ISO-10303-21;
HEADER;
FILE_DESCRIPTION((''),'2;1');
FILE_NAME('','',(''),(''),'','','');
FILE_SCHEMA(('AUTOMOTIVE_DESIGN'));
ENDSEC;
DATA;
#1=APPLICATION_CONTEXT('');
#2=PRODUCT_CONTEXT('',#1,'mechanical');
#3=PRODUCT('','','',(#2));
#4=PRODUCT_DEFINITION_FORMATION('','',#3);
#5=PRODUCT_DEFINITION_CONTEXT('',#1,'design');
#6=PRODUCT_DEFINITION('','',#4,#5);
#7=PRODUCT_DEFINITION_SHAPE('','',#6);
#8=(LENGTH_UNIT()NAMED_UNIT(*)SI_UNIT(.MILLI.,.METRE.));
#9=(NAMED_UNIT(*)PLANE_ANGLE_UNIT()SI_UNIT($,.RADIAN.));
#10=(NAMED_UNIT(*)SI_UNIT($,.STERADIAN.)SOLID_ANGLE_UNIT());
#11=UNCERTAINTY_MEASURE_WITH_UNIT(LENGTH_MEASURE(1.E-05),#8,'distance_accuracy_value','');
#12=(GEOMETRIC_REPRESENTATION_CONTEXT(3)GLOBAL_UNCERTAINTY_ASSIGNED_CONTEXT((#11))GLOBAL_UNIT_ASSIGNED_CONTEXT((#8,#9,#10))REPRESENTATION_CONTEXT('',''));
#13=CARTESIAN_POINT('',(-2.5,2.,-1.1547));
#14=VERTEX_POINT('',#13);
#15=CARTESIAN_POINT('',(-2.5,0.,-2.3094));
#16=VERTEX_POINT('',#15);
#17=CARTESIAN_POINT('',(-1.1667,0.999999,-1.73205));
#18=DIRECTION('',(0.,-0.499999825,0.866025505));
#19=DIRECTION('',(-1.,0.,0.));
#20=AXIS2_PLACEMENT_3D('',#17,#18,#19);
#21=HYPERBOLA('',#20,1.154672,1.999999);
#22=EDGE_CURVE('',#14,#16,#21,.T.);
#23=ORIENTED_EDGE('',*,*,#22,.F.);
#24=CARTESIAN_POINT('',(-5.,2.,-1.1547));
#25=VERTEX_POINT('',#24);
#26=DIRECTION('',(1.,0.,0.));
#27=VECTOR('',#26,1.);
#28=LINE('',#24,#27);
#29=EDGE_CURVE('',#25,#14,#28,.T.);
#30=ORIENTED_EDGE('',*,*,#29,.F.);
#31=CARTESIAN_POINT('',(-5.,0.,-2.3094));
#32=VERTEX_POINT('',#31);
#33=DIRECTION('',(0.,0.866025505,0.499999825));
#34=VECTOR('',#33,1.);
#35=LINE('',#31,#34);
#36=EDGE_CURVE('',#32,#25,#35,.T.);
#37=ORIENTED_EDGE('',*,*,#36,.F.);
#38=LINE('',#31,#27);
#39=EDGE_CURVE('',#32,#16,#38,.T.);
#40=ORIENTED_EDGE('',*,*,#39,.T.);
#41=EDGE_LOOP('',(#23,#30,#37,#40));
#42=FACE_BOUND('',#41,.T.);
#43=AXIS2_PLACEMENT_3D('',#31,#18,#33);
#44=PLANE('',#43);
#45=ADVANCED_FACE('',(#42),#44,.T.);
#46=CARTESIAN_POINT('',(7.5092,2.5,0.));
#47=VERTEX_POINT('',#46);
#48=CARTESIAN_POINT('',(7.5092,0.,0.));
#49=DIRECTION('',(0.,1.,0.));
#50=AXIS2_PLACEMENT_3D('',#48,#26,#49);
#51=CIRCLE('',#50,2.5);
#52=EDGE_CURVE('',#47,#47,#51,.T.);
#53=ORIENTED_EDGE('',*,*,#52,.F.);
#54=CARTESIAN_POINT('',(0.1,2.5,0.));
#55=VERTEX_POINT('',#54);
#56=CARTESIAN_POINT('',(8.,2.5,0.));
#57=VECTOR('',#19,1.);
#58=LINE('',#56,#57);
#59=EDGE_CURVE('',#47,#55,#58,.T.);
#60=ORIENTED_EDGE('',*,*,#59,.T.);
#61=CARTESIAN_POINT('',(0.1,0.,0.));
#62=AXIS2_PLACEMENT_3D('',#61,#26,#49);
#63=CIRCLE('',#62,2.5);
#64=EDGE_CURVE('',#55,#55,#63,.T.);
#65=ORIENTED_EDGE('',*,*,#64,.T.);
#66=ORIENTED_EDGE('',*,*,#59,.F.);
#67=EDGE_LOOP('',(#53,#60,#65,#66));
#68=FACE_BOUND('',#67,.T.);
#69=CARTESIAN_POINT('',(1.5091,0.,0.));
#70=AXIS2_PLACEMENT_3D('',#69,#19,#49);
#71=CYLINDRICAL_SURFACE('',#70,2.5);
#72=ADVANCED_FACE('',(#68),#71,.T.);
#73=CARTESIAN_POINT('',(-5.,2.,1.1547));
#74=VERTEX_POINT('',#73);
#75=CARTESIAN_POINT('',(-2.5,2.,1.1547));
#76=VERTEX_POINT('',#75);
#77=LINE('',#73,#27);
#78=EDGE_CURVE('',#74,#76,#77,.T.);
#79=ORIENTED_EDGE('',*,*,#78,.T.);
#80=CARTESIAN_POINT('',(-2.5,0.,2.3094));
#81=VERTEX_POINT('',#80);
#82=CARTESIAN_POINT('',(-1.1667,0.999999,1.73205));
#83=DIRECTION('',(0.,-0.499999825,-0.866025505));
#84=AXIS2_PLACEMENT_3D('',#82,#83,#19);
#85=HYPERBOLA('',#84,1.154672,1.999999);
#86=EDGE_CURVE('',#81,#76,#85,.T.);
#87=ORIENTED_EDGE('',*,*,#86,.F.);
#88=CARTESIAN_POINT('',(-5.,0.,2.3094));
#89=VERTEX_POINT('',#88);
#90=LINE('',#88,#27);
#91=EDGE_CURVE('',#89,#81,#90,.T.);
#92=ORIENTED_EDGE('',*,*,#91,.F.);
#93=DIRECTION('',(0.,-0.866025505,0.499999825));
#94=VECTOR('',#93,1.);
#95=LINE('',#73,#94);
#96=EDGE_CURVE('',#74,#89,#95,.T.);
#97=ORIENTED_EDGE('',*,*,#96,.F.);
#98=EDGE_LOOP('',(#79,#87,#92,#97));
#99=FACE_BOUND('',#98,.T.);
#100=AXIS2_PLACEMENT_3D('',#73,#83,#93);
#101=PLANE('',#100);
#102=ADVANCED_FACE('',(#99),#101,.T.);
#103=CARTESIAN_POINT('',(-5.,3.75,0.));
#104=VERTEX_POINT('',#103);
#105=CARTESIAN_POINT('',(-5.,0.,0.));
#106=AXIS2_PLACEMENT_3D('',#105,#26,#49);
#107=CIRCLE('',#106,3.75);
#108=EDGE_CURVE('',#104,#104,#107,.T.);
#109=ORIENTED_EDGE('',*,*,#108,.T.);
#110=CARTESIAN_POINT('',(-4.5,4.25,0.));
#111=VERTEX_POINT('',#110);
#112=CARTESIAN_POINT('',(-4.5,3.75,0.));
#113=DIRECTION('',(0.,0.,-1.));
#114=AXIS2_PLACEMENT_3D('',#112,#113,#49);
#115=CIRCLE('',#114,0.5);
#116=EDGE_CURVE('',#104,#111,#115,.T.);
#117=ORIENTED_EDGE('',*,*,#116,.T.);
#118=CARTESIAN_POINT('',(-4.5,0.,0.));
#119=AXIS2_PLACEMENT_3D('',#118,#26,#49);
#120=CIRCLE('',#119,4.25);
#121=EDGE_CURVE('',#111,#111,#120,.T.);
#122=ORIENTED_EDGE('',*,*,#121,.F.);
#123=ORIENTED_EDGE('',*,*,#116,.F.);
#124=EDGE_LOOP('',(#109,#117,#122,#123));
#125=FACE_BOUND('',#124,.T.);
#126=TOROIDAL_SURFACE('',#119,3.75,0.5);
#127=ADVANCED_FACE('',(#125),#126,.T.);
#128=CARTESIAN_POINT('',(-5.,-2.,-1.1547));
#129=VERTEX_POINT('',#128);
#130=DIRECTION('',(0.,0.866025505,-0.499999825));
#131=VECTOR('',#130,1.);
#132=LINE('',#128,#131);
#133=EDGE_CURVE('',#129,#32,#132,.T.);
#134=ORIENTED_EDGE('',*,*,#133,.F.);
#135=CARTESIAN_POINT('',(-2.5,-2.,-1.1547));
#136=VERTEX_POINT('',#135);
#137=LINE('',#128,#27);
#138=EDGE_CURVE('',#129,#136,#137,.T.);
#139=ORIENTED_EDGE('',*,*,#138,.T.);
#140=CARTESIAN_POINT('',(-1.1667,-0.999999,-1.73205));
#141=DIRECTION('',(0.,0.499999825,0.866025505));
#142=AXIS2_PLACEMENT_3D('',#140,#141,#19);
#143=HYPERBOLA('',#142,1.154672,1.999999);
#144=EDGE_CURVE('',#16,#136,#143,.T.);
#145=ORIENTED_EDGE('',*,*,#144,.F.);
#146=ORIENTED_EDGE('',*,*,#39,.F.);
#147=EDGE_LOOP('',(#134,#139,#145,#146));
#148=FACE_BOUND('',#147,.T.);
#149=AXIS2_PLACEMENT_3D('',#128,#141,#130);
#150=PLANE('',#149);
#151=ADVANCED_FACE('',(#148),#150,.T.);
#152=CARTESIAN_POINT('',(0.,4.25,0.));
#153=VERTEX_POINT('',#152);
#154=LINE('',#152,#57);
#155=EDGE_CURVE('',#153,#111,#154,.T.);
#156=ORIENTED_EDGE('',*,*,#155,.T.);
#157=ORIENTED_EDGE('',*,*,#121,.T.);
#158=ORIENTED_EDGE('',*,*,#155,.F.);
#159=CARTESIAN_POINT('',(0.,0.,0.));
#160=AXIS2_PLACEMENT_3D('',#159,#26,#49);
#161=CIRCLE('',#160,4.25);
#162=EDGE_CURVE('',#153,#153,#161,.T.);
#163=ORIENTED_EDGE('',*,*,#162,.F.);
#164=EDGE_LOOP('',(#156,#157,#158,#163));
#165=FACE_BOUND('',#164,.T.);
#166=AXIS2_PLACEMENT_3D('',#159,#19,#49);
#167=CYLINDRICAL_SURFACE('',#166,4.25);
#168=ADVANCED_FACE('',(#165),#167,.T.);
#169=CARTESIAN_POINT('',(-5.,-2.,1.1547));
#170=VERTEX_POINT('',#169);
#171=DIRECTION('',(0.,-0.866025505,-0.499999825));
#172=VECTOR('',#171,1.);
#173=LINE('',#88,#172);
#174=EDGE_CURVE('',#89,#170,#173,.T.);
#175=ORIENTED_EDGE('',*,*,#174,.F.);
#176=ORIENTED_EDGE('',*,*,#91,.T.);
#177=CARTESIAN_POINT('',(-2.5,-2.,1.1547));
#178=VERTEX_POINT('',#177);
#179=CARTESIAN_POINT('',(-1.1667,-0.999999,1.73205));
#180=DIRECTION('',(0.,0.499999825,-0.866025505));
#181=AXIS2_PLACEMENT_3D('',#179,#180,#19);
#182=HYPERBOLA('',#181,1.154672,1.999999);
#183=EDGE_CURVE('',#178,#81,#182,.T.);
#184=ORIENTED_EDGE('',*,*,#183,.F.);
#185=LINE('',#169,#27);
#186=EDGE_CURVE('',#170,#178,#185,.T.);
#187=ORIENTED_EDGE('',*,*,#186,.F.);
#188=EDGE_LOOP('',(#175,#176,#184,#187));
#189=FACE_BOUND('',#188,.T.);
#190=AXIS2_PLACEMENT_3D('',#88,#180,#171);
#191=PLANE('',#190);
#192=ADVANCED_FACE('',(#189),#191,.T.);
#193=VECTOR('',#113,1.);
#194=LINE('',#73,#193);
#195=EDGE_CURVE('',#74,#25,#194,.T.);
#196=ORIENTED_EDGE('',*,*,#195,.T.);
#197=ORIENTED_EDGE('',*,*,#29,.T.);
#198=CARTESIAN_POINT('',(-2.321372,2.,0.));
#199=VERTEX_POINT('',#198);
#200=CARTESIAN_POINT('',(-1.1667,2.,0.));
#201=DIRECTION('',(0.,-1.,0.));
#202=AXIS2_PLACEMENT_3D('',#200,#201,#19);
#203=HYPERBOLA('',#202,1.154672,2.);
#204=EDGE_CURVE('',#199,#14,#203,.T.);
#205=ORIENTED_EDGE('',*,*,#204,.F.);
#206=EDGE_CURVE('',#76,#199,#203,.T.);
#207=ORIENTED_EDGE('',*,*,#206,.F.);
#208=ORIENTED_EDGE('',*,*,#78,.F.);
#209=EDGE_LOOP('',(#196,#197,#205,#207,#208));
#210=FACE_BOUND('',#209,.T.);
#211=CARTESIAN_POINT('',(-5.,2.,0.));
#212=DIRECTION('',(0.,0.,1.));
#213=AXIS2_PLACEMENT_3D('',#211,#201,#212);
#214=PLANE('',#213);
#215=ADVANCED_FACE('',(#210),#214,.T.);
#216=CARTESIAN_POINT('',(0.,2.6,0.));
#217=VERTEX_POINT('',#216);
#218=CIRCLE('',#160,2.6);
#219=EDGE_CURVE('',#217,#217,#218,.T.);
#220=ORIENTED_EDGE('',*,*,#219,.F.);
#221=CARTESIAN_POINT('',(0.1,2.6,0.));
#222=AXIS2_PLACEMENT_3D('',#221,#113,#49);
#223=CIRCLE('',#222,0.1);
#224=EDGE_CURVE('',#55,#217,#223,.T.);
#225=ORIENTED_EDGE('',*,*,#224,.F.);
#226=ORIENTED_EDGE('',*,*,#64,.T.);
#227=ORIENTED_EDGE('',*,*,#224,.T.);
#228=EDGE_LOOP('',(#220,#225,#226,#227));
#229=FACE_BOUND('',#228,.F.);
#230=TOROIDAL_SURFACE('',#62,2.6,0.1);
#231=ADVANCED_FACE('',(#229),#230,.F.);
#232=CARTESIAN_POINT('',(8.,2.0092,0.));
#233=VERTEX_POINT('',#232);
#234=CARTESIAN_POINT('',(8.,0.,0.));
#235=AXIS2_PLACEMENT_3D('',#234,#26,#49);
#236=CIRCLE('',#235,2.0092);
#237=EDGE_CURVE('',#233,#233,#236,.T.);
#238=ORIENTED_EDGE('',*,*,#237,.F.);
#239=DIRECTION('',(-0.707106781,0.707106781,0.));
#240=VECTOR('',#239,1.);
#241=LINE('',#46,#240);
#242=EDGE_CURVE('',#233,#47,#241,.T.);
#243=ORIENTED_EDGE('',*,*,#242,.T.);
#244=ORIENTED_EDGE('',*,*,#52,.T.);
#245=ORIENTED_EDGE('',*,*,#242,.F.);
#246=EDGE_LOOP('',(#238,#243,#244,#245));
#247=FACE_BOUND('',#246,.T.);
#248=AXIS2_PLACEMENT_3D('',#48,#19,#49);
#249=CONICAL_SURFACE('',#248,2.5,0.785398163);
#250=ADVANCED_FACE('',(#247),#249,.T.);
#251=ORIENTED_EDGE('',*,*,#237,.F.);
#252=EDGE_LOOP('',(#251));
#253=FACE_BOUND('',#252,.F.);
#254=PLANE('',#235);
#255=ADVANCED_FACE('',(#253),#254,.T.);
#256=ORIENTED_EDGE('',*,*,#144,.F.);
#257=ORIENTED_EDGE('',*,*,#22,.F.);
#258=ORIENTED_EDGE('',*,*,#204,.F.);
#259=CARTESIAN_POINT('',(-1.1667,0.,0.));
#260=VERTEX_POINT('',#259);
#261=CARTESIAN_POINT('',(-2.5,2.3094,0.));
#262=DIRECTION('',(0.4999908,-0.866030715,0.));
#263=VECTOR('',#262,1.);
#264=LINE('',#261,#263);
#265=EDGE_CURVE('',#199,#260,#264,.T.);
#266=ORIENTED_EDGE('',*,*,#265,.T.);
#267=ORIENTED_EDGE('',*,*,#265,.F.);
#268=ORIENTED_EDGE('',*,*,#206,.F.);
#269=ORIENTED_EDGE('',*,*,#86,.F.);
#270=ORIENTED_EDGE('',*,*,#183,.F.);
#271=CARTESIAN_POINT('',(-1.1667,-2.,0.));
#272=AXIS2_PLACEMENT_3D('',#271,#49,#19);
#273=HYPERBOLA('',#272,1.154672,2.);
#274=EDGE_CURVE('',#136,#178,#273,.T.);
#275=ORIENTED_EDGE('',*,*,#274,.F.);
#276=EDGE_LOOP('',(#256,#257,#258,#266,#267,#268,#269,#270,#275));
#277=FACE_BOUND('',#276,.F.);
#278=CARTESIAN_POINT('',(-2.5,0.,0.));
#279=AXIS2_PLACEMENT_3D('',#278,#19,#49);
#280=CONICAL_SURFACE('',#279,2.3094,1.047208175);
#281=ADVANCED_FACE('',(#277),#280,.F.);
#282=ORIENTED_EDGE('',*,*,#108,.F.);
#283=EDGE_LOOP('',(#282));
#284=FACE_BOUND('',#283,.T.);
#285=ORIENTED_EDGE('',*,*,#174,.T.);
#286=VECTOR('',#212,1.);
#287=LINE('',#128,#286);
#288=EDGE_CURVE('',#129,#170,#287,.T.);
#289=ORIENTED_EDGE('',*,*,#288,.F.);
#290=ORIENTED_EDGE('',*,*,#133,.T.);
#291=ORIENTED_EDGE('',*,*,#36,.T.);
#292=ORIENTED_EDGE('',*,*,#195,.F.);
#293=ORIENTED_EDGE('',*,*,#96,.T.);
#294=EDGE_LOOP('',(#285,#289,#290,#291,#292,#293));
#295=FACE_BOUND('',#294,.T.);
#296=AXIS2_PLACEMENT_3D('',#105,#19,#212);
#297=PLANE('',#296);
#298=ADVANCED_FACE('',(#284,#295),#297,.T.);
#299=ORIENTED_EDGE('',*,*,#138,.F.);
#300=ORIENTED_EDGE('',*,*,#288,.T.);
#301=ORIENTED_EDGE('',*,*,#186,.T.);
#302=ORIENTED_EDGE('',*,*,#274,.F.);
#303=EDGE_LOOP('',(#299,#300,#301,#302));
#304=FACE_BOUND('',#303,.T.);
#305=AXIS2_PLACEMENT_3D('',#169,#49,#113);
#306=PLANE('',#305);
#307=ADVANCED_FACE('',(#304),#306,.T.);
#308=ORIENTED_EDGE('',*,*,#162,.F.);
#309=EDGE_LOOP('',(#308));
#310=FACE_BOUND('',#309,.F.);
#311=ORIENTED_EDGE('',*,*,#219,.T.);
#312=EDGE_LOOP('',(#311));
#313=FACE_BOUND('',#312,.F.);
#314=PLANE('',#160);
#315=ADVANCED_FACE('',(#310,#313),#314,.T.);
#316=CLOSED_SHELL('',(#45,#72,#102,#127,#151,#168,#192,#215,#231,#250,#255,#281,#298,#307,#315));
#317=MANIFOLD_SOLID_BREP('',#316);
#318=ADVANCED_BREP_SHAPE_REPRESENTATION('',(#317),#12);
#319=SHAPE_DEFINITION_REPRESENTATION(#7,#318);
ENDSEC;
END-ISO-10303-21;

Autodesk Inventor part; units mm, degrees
ref_plane "YZ Plane" through (0, 0, 0) normal (1, 0, 0) x (0, 1, 0)
ref_plane "XZ Plane" through (0, 0, 0) normal (0, 1, 0) x (-1, 0, 0)
sketch "Esquisse1" plane through (0, 0, 0) normal (0, 0, 1) x (1, 0, 0)
  line L0 (-1.1667, 0) -> (8, 0)
  line L1 (8, 0) -> (8, 2.5)
  line L2 (8, 2.5) -> (2, 2.5)
  line L3 (2, 2.5) -> (1.5091, 2.5)
  line L4 (1.5091, 2.5) -> (0, 2.5)
  line L5 (0, 2.5) -> (0, 4.25)
  line L6 (0, 4.25) -> (-5, 4.25)
  line L7 (-5, 4.25) -> (-5, 2.3094)
  line L8 (-5, 2.3094) -> (-2.5, 2.3094)
  line L9 (-2.5, 2.3094) -> (-1.1667, 0)
  line L10 (-7.6, 0) -> (10.6, 0) projected
  line L11 (0, -0.85) -> (0, 5.1) projected
  line L12 (2, 2.5) -> (0, 2.5) construction
  dimension "d1" = 6
  dimension "d2" = 0.4909
  dimension "d3" = 5
  dimension "d4" = 2.5
  dimension "d5" = 60
  dimension "d6" = 5
  dimension "d7" = 5
  dimension "d8" = 4.6188
  dimension "d9" = 8.5
  dimension "d26" = 8
revolve "Corps" add sketch "Esquisse1" angle 360 about axis through (-1.1667, 0, 0) along (1, 0, 0)
sketch "Esquisse2" plane through (-5, 0, 0) normal (-1, 0, 0) x (0, 0, 1)
  circle A0 centre (0, 0) radius 2.3094 projected
  line L0 (0, -5.95) -> (0, 5.95) projected
  line L1 (-5.95, 0) -> (5.95, 0) projected
  line L2 (2.3094, 0) -> (1.1547, -2)
  line L3 (1.1547, -2) -> (-1.1547, -2)
  line L4 (-1.1547, -2) -> (-2.3094, 0)
  line L5 (-2.3094, 0) -> (-1.1547, 2)
  line L6 (-1.1547, 2) -> (1.1547, 2)
  line L7 (1.1547, 2) -> (2.3094, 0)
extrude "Rainure" add sketch "Esquisse2" against normal up to next contours L7 A0 | A0 L2 | L6 L0 A0 | A0 L0 L3 | L0 L6 A0 | A0 L3 L0 | L4 A0 | A0 L5
fillet "Congé1" radius 0.5 1 edges at (-5, -4.25, 0)
thread "Filetage" size "M5x0.8" class "6g" standard "ISO Metric profile" length 6
chamfer "Chanfrein1" distance 0.4908 distance2 0.4908 1 edges at (8, -2.5, 0) measured on face at (8, -0.6238, -0.819)
ref_plane "Work Plane1" through (29, 0, 0) normal (0, -1, 0) x (1, 0, 0)
fillet "Fillet2" radius 0.1 1 edges at (0, -2.5, 0)
equation "\"d30\" = R"
equation "\"d17\" = RR"
equation "\"d13\" = GEL"
equation "\"d15\" = -0.5 * SPD + 0.5 * GD"
equation "\"d16\" = GUL"
equation "\"d1\" = GEL"
equation "\"d3\" = KOH"
equation "\"d4\" = INTI"
equation "\"d6\" = GD"
equation "\"d7\" = BDM"
equation "\"d8\" = 1.1547 * SW"
equation "\"d9\" = KOD"
equation "\"d26\" = NLG"
equation "\"GD\" = 5"
equation "\"NLG\" = 8"
equation "\"GEL\" = 6"
equation "\"KOD\" = 8.5"
equation "\"KOH\" = 5"
equation "\"INTI\" = 2.5"
equation "\"GAL\" = 0.61345 * PTC"
equation "\"GUL\" = 0.61345 * PTC"
equation "\"BDM\" = NND"
equation "\"SW\" = 4"
equation "\"RR\" = 0.5"
equation "\"SPD\" = NND - 1.2269 * PTC"
equation "\"R\" = 0.1"
equation "\"TOA\" = 30deg"
equation "\"GD1\" = THREADDIA - 1.2269 * PTC"
equation "\"THREADDIA\" = 5"
equation "\"FAWI\" = 45deg"
equation "\"PTC\" = 0.8"
equation "\"NND\" = 5"
equation "\"E0\" = 1.155 * SW"
properties part number "ISO 4762 - M5 x 8" material "Acier inoxydable 440C"
